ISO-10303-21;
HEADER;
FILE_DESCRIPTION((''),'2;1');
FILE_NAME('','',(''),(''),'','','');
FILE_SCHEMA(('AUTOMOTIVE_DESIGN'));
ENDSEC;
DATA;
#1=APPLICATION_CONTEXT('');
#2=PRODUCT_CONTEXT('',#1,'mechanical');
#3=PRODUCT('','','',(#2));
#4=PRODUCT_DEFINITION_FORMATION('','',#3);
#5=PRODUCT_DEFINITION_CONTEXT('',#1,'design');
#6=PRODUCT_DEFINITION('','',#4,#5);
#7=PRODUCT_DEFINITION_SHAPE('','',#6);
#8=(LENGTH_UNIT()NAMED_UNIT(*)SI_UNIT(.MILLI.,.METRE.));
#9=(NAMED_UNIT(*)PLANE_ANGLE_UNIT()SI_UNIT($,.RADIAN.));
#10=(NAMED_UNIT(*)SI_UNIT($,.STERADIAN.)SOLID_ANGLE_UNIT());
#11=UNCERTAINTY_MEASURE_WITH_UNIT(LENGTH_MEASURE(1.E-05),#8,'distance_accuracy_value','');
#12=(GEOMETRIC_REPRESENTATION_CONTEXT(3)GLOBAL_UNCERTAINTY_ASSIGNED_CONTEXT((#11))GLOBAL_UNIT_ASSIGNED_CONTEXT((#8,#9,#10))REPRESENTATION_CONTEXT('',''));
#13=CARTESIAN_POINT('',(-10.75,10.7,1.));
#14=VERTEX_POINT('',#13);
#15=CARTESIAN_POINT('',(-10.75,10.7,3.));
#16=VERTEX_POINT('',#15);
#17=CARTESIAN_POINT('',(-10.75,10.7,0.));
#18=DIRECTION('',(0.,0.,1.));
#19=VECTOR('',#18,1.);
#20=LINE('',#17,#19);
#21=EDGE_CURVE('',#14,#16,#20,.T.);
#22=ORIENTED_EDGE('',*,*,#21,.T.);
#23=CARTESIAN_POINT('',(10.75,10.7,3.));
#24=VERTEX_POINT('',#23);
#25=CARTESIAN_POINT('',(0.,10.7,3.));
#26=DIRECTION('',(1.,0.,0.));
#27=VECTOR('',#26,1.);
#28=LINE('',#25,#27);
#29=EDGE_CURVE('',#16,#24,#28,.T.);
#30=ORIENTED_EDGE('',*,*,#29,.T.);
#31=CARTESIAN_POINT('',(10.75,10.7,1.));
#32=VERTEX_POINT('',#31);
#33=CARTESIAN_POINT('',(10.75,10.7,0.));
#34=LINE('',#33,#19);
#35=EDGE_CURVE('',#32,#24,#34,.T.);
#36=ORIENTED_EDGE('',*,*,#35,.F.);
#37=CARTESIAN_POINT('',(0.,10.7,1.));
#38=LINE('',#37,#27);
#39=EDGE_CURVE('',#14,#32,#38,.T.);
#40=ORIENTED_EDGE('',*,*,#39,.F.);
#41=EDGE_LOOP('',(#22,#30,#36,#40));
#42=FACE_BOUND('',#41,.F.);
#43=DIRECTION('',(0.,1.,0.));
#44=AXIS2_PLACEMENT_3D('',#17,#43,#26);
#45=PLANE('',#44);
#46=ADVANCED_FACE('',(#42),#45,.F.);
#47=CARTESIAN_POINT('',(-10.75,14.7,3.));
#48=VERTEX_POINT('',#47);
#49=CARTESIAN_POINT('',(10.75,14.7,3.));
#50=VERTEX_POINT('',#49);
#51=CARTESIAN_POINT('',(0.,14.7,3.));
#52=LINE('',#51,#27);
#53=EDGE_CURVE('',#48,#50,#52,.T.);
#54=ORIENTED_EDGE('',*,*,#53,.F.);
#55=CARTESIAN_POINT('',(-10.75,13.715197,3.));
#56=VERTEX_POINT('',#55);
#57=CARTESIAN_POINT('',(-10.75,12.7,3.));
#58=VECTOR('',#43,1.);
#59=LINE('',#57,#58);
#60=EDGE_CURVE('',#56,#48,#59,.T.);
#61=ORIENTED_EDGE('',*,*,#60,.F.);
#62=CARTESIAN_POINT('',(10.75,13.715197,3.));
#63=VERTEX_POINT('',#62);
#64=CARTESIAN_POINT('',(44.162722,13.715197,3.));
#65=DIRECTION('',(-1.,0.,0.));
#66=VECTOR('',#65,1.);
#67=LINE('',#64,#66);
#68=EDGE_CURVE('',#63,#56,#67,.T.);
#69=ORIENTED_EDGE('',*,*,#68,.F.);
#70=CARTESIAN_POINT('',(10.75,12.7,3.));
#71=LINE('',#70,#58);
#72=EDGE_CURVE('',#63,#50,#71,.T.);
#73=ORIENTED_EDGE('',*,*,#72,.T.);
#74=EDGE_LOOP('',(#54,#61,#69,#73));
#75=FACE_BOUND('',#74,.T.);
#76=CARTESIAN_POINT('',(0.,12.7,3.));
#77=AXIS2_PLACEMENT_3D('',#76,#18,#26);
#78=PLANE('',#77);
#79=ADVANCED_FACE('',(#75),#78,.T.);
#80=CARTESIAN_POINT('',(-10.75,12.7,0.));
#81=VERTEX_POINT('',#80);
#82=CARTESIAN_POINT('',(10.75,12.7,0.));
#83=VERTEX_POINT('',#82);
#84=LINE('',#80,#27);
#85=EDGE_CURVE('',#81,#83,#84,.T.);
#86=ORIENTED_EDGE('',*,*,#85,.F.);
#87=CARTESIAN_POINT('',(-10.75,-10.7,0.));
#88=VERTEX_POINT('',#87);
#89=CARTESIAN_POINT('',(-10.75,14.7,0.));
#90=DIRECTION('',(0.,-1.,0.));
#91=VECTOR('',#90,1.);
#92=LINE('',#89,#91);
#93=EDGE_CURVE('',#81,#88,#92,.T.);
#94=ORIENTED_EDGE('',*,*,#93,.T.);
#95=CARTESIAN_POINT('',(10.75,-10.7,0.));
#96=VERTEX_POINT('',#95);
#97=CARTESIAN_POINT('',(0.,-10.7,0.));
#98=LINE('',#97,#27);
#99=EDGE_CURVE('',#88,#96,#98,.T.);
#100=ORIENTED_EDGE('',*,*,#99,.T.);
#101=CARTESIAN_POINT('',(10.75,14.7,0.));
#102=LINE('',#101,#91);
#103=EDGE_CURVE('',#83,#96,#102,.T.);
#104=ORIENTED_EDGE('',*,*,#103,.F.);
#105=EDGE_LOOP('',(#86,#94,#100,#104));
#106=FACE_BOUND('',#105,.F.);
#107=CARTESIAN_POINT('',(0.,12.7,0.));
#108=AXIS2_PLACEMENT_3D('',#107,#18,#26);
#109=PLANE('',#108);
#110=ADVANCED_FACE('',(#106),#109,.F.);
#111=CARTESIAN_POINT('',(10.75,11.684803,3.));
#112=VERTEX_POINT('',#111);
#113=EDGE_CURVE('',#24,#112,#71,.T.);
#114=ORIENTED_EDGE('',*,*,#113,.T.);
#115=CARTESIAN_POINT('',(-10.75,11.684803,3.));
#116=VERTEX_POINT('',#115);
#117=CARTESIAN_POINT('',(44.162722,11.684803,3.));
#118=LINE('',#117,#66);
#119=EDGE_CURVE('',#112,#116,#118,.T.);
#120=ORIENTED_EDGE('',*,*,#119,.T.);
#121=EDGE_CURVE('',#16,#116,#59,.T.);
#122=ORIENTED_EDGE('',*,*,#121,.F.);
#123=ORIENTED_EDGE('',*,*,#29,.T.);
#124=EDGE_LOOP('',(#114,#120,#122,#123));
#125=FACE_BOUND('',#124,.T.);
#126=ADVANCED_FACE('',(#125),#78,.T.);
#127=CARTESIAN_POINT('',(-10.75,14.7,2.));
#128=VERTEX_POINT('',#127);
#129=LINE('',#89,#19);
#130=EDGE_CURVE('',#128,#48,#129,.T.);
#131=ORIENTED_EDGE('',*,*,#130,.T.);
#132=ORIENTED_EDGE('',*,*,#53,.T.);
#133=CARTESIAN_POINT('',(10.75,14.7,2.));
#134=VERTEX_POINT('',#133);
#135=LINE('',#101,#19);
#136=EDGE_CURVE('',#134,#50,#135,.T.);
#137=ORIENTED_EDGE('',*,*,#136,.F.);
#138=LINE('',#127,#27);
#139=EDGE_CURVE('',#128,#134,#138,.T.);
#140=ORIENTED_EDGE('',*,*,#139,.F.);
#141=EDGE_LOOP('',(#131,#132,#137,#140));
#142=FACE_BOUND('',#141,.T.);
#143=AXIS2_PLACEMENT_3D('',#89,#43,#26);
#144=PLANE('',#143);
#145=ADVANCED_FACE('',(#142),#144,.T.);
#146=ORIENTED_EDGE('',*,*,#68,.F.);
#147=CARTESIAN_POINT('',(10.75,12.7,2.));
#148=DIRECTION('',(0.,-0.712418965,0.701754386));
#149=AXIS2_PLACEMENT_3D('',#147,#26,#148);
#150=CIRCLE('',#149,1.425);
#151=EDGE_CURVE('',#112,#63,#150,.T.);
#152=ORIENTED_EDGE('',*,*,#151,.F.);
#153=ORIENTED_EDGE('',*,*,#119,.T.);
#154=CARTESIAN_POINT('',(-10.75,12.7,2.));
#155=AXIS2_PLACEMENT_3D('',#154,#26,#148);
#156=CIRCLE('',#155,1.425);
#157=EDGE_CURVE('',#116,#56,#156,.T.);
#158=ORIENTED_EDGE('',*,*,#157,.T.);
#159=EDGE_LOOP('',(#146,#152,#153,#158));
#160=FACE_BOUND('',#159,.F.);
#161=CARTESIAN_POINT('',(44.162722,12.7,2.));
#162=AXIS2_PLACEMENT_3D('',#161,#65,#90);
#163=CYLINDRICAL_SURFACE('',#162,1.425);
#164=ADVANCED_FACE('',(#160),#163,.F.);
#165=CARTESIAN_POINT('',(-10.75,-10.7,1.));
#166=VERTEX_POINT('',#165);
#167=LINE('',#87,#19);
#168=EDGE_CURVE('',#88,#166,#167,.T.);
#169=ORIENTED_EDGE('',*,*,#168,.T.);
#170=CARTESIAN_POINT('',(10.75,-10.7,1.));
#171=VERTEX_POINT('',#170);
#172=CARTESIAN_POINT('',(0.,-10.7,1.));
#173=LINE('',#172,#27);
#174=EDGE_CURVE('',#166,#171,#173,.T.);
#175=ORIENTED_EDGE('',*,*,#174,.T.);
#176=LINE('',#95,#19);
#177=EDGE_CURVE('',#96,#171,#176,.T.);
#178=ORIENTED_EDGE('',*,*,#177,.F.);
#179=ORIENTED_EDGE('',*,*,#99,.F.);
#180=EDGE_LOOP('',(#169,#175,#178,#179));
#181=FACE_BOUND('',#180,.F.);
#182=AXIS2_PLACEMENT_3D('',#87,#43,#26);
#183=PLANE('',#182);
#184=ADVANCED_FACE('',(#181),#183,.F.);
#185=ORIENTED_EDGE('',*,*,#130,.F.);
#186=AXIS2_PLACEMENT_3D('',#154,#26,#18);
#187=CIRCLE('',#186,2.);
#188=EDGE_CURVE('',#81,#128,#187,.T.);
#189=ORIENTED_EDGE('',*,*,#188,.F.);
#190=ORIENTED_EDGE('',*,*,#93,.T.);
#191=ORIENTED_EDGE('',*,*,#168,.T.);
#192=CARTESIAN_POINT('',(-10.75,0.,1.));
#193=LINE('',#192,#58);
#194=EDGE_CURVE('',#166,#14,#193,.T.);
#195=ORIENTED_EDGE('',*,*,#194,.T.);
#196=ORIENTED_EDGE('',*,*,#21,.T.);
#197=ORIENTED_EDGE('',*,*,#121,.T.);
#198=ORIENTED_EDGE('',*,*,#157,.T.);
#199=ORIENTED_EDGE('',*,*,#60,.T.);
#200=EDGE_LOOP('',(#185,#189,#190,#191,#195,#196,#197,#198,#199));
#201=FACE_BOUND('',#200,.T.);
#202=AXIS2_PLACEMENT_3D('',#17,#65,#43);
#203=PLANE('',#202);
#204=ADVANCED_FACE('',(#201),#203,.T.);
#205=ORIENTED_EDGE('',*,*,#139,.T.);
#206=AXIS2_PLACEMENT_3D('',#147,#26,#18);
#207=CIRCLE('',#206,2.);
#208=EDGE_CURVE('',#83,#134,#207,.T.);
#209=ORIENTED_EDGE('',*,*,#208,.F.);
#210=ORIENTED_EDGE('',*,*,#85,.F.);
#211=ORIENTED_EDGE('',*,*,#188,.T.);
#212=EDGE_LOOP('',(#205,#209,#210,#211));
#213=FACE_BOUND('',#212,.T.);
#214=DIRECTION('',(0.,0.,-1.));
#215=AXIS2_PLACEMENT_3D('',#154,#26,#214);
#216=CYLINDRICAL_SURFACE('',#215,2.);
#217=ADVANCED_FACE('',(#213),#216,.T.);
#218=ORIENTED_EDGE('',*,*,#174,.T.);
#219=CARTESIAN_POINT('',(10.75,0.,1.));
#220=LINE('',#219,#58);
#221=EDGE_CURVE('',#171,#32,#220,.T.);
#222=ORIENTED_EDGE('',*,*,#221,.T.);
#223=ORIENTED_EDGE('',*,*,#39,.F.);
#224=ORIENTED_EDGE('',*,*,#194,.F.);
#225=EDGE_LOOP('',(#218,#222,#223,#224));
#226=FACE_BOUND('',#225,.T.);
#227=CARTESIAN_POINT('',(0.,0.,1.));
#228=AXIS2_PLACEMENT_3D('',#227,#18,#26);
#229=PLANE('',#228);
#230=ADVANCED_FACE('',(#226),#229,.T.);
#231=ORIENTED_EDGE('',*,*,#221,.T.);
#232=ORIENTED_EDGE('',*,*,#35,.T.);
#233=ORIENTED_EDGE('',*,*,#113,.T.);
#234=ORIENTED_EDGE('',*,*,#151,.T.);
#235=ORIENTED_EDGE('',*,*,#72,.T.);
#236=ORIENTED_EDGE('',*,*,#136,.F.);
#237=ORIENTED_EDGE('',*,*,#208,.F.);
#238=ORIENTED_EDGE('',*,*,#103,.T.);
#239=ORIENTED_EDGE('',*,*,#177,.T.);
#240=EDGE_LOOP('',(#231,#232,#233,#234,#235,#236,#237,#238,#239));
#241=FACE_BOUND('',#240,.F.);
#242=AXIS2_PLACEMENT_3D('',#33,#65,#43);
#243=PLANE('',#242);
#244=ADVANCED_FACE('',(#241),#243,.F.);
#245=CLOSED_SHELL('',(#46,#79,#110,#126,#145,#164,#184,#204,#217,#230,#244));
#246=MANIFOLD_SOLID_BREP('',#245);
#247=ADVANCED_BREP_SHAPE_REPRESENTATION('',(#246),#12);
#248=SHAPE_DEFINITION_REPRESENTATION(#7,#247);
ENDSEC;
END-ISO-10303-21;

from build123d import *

# Parameters (mm, degrees)
F0_W     = 21.5
F0_H     = 21.4
F1_DEPTH = 1
F0_H_2   = 4
F2_DEPTH = 3
F4_D     = 2.85
F5_R     = 2


# Not quite as in the source:
# - a feature names something its author has since deleted; it is built from what else it names


with BuildPart() as f1:
    # F0 (on Top) → F1 (new body)
    with BuildSketch(Plane.XY):
        Rectangle(F0_W, F0_H)
    extrude(amount=F1_DEPTH)

    # F0 (on Top) → F2 (join)
    with BuildSketch(Plane.XY):
        with Locations((0, 12.7)):
            Rectangle(F0_W, F0_H_2)
    extrude(amount=F2_DEPTH)

    # F4 (through all)
    with Locations(Plane.YZ.offset(10.75)):
        with Locations((12.7, 2)):
            Hole(F4_D / 2)

    # F5
    f5_edges = [f1.edges().sort_by_distance(p)[0] for p in [
        (0, 14.7, 0),
    ]]
    fillet(f5_edges, radius=F5_R)


solid = f1.part
